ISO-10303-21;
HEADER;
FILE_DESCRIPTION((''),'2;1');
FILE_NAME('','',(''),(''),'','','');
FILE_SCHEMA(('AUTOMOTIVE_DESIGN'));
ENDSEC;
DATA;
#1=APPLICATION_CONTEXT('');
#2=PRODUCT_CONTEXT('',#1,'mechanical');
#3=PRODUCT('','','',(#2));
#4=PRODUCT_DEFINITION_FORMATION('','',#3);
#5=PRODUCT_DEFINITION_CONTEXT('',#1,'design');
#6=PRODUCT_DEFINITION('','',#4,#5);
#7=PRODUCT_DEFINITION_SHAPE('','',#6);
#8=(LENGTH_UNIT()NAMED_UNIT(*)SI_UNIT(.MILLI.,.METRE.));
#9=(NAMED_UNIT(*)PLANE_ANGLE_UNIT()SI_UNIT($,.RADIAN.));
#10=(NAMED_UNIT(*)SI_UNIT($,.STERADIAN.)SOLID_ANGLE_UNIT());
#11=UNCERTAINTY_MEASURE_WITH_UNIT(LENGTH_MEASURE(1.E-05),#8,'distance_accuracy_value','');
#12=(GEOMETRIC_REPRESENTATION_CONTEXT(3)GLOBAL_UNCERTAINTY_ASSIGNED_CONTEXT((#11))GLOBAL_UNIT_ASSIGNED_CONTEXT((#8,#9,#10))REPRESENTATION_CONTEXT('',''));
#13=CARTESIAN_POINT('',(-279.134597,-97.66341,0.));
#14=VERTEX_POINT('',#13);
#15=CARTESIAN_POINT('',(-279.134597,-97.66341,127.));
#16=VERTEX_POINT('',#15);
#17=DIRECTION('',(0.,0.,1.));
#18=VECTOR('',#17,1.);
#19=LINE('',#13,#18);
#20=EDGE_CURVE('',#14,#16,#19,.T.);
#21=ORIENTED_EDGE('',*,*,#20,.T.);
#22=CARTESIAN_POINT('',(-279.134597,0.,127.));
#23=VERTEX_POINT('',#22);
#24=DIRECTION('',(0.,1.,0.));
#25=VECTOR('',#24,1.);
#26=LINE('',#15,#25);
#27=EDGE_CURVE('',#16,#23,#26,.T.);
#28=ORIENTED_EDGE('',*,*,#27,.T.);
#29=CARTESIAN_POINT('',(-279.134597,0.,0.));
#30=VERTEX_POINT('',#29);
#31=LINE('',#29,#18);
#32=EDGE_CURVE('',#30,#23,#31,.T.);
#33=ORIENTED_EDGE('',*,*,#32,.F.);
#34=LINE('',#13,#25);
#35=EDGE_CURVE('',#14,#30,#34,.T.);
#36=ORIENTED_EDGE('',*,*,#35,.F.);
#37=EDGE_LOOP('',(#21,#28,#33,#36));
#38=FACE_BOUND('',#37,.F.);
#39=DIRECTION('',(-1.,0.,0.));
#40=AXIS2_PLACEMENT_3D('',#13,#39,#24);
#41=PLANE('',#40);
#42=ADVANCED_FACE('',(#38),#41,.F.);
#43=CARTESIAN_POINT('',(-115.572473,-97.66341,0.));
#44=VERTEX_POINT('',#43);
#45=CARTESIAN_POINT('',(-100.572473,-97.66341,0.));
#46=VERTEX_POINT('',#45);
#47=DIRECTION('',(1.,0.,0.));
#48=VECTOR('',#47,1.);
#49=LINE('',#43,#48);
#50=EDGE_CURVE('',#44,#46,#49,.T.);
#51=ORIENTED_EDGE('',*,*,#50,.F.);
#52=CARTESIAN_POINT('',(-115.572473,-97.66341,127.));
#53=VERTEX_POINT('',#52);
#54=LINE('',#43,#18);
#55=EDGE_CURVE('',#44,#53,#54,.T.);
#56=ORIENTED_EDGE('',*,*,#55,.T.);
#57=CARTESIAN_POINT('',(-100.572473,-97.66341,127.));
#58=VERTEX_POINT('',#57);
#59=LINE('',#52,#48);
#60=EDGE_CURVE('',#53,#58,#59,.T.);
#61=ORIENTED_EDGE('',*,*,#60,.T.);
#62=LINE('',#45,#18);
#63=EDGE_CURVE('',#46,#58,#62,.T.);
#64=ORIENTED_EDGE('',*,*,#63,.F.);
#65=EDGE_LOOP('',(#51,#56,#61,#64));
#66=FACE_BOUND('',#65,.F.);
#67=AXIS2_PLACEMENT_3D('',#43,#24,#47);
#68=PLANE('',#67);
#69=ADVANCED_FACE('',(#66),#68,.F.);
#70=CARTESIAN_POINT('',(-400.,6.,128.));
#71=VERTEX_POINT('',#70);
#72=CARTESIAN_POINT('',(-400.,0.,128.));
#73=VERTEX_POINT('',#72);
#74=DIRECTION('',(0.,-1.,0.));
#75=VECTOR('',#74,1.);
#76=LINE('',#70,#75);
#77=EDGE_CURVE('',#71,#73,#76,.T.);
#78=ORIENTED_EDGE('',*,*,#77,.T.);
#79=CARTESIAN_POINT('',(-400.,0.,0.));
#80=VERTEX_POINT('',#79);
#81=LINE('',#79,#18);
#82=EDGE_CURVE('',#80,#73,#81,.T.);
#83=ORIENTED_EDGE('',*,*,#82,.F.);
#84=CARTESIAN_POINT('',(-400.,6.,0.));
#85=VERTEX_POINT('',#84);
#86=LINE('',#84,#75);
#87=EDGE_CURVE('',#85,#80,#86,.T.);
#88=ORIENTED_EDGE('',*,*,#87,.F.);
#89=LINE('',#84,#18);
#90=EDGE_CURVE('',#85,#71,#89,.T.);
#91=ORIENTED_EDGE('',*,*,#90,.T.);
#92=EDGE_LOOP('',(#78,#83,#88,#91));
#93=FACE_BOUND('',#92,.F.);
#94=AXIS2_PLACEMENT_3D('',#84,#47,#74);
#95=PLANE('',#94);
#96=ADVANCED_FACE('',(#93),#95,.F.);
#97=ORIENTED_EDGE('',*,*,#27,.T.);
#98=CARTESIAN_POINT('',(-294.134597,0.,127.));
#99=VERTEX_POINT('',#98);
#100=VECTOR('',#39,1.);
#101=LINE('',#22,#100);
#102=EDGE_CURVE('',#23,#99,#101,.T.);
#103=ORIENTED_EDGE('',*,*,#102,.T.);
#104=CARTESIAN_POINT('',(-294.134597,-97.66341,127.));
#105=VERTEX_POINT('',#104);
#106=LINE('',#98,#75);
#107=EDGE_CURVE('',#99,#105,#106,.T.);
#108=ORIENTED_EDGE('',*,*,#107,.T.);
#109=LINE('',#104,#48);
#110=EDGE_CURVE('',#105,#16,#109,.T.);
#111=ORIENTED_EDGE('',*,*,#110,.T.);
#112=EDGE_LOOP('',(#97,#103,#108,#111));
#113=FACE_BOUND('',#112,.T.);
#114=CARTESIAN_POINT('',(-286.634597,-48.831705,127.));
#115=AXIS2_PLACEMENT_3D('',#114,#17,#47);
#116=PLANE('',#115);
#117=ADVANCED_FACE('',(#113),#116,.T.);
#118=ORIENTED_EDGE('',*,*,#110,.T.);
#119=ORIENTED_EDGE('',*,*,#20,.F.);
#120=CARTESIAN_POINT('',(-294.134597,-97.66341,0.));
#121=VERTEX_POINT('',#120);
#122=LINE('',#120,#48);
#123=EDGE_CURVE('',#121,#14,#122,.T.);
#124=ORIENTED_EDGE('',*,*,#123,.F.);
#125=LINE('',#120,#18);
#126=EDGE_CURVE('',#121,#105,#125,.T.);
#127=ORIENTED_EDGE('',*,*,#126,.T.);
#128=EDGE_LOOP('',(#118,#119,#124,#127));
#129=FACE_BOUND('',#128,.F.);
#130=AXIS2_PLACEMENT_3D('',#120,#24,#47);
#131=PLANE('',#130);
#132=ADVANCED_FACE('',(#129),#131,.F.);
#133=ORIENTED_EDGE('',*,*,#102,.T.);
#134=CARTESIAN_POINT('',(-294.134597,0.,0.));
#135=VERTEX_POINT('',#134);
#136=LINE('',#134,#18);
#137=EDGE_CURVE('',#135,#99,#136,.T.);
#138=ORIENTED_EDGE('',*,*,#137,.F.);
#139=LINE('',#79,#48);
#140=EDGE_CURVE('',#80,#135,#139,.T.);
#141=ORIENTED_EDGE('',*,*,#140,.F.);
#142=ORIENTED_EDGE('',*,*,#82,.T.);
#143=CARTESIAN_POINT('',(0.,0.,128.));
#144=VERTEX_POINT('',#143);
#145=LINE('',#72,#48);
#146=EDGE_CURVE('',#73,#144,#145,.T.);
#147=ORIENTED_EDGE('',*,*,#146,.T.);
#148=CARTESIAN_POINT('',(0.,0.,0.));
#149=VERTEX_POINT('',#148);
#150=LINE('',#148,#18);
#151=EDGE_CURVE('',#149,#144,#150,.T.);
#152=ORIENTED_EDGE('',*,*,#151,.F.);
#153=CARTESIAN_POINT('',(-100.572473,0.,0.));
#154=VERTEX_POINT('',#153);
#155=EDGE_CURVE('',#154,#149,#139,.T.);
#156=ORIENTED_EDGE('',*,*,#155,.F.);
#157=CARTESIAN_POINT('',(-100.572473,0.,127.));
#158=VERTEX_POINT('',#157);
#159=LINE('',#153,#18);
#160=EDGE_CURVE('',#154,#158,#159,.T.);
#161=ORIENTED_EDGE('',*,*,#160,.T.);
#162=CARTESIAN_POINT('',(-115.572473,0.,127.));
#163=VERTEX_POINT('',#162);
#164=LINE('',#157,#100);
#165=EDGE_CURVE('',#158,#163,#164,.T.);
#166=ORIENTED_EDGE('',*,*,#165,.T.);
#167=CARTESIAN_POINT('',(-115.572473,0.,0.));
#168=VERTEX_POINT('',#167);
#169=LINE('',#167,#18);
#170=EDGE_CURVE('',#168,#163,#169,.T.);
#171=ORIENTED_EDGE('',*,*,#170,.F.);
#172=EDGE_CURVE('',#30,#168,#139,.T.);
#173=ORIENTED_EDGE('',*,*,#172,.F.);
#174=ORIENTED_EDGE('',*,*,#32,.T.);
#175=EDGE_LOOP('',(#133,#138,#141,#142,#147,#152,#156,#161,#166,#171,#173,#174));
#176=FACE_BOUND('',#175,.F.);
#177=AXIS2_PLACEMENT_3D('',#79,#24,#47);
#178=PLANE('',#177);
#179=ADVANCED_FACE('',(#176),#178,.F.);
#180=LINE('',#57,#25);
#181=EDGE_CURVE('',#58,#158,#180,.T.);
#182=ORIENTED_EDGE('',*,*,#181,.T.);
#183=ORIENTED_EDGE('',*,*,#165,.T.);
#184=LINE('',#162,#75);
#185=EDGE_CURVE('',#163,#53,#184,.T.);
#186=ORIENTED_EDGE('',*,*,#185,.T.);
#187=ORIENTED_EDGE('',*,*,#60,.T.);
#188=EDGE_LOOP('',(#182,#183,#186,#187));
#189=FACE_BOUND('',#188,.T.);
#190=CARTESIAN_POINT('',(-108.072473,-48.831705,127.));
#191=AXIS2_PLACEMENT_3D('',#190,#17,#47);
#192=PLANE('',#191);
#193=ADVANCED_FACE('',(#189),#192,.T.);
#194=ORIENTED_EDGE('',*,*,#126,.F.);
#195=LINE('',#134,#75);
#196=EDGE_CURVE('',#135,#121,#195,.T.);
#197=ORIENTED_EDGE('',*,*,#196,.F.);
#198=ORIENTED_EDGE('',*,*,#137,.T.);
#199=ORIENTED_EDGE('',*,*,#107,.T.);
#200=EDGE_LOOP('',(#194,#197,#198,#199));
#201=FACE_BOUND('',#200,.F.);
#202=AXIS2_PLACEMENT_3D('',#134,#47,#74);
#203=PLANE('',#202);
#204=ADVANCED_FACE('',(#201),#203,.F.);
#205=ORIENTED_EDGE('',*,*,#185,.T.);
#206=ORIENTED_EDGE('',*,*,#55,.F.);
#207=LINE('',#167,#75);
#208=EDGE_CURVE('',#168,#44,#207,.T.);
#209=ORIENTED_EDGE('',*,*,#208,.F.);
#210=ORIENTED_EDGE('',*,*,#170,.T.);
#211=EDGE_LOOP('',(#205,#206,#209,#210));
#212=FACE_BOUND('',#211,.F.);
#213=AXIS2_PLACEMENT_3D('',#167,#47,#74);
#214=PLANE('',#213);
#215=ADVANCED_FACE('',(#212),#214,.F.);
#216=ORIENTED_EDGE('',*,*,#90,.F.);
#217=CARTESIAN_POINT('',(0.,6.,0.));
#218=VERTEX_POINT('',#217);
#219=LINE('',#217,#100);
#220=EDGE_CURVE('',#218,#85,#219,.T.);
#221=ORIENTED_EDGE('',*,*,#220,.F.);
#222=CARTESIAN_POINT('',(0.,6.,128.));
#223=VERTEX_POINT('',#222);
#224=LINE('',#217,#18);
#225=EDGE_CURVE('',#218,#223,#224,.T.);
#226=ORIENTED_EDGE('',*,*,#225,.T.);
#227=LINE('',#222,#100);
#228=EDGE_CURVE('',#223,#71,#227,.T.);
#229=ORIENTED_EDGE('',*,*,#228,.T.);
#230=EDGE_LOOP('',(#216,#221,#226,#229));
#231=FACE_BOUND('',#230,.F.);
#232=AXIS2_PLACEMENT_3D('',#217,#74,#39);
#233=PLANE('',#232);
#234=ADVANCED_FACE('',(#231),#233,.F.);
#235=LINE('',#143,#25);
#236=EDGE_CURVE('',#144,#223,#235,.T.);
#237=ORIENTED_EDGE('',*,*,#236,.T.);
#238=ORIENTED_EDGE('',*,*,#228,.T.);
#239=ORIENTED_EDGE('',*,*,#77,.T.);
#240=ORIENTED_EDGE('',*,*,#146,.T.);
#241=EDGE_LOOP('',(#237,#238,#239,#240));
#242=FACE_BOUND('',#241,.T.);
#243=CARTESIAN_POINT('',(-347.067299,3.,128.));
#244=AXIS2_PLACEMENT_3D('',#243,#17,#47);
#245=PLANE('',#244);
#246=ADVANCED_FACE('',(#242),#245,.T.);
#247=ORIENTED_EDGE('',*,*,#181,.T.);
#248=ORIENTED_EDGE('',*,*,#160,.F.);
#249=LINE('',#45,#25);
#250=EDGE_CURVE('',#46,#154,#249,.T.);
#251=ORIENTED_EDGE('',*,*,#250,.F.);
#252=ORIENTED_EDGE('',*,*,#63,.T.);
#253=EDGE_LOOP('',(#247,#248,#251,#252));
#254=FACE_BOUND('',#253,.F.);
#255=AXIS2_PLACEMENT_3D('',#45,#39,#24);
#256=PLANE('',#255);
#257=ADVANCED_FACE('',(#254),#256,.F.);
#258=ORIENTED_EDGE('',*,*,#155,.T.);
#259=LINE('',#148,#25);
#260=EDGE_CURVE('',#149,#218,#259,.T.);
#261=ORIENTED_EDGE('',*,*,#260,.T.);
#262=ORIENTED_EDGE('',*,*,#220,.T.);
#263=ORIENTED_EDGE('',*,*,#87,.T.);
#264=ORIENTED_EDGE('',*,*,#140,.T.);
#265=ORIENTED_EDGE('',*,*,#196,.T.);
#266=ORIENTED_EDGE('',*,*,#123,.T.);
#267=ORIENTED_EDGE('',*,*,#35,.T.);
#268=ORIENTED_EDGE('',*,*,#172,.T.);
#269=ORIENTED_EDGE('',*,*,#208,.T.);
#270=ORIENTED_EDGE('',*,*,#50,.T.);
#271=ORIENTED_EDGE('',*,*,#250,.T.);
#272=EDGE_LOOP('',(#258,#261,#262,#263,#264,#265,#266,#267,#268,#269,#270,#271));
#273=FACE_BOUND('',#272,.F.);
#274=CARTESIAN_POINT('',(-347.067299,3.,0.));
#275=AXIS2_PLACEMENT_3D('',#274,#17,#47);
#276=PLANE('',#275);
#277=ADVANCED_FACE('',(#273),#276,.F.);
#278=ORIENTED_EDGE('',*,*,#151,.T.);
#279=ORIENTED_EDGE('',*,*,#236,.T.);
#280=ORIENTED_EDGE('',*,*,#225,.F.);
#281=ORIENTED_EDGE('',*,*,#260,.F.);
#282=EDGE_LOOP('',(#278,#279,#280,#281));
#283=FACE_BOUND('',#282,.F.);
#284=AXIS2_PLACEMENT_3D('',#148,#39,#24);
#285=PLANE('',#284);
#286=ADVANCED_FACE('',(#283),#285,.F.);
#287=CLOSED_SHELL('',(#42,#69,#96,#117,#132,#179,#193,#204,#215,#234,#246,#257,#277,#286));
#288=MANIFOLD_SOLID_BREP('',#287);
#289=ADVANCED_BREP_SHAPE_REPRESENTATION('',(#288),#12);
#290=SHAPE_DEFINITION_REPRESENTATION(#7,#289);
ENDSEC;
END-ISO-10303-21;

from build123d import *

# Parameters (mm, degrees)
F0_W     = 8.9696688134
F0_H     = 6
F0_W_2   = 6.0303311866
F0_W_3   = 7.6489803101
F0_W_4   = 7.3510196899
F2_DEPTH = 128
F4_DEPTH = 127


# Not quite as in the source:
# - the program builds the solid bodies; features that only make, move or delete a surface that nothing else refers to are left out


with BuildPart() as f2:
    # F0 (on Top) → F2 (new body)
    with BuildSketch(Plane.XY):
        Polygon((-400, 0), (-294.1345971149, 0), (-294.1345971149, 6), (-299.6463162062, 6), (-311.9468285562, 6), (-322.7511938045, 6), (-335.9566328529, 6), (-348.7171674377, 6), (-362.4063217106, 6), (-376.9397732412, 6), (-400, 6), align=None)
        with Locations((-283.6194315216, 3)):
            Rectangle(F0_W, F0_H)
        with Locations((-291.1194315216, 3)):
            Rectangle(F0_W_2, F0_H)
        Polygon((-279.1345971149, 0), (-115.5724730993, 0), (-115.5724730993, 6), (-120.0142995768, 6), (-130.6865749399, 6), (-142.439753188, 6), (-152.7159749868, 6), (-164.8405666594, 6), (-175.9109262937, 6), (-188.4297876225, 6), (-205.2331021726, 6), (-216.1265840576, 6), (-227.5328489064, 6), (-240.1054796123, 6), (-251.4180912129, 6), (-260.7190593146, 6), (-272.6732546984, 6), (-279.1345971149, 6), align=None)
        with Locations((-111.7479829443, 3)):
            Rectangle(F0_W_3, F0_H)
        with Locations((-104.2479829443, 3)):
            Rectangle(F0_W_4, F0_H)
        Polygon((-100.5724730993, 0), (0, 0), (0, 6), (-21.7185619105, 6), (-32.3376952831, 6), (-47.4983571934, 6), (-60.9528624883, 6), (-73.3657559167, 6), (-83.3882540464, 6), (-97.7746488723, 6), (-100.5724730993, 6), align=None)
    extrude(amount=F2_DEPTH)

    # F0 (on Top) → F4 (join)
    with BuildSketch(Plane.XY):
        Polygon((-279.1345971149, -97.6634095667), (-279.1345971149, 0), (-288.1042659283, 0), (-294.1345971149, 0), (-294.1345971149, -97.6634095667), align=None)
        Polygon((-100.5724730993, -97.6634095667), (-100.5724730993, 0), (-107.9234927893, 0), (-115.5724730993, 0), (-115.5724730993, -97.6634095667), align=None)
    extrude(amount=F4_DEPTH)


solid = f2.part
